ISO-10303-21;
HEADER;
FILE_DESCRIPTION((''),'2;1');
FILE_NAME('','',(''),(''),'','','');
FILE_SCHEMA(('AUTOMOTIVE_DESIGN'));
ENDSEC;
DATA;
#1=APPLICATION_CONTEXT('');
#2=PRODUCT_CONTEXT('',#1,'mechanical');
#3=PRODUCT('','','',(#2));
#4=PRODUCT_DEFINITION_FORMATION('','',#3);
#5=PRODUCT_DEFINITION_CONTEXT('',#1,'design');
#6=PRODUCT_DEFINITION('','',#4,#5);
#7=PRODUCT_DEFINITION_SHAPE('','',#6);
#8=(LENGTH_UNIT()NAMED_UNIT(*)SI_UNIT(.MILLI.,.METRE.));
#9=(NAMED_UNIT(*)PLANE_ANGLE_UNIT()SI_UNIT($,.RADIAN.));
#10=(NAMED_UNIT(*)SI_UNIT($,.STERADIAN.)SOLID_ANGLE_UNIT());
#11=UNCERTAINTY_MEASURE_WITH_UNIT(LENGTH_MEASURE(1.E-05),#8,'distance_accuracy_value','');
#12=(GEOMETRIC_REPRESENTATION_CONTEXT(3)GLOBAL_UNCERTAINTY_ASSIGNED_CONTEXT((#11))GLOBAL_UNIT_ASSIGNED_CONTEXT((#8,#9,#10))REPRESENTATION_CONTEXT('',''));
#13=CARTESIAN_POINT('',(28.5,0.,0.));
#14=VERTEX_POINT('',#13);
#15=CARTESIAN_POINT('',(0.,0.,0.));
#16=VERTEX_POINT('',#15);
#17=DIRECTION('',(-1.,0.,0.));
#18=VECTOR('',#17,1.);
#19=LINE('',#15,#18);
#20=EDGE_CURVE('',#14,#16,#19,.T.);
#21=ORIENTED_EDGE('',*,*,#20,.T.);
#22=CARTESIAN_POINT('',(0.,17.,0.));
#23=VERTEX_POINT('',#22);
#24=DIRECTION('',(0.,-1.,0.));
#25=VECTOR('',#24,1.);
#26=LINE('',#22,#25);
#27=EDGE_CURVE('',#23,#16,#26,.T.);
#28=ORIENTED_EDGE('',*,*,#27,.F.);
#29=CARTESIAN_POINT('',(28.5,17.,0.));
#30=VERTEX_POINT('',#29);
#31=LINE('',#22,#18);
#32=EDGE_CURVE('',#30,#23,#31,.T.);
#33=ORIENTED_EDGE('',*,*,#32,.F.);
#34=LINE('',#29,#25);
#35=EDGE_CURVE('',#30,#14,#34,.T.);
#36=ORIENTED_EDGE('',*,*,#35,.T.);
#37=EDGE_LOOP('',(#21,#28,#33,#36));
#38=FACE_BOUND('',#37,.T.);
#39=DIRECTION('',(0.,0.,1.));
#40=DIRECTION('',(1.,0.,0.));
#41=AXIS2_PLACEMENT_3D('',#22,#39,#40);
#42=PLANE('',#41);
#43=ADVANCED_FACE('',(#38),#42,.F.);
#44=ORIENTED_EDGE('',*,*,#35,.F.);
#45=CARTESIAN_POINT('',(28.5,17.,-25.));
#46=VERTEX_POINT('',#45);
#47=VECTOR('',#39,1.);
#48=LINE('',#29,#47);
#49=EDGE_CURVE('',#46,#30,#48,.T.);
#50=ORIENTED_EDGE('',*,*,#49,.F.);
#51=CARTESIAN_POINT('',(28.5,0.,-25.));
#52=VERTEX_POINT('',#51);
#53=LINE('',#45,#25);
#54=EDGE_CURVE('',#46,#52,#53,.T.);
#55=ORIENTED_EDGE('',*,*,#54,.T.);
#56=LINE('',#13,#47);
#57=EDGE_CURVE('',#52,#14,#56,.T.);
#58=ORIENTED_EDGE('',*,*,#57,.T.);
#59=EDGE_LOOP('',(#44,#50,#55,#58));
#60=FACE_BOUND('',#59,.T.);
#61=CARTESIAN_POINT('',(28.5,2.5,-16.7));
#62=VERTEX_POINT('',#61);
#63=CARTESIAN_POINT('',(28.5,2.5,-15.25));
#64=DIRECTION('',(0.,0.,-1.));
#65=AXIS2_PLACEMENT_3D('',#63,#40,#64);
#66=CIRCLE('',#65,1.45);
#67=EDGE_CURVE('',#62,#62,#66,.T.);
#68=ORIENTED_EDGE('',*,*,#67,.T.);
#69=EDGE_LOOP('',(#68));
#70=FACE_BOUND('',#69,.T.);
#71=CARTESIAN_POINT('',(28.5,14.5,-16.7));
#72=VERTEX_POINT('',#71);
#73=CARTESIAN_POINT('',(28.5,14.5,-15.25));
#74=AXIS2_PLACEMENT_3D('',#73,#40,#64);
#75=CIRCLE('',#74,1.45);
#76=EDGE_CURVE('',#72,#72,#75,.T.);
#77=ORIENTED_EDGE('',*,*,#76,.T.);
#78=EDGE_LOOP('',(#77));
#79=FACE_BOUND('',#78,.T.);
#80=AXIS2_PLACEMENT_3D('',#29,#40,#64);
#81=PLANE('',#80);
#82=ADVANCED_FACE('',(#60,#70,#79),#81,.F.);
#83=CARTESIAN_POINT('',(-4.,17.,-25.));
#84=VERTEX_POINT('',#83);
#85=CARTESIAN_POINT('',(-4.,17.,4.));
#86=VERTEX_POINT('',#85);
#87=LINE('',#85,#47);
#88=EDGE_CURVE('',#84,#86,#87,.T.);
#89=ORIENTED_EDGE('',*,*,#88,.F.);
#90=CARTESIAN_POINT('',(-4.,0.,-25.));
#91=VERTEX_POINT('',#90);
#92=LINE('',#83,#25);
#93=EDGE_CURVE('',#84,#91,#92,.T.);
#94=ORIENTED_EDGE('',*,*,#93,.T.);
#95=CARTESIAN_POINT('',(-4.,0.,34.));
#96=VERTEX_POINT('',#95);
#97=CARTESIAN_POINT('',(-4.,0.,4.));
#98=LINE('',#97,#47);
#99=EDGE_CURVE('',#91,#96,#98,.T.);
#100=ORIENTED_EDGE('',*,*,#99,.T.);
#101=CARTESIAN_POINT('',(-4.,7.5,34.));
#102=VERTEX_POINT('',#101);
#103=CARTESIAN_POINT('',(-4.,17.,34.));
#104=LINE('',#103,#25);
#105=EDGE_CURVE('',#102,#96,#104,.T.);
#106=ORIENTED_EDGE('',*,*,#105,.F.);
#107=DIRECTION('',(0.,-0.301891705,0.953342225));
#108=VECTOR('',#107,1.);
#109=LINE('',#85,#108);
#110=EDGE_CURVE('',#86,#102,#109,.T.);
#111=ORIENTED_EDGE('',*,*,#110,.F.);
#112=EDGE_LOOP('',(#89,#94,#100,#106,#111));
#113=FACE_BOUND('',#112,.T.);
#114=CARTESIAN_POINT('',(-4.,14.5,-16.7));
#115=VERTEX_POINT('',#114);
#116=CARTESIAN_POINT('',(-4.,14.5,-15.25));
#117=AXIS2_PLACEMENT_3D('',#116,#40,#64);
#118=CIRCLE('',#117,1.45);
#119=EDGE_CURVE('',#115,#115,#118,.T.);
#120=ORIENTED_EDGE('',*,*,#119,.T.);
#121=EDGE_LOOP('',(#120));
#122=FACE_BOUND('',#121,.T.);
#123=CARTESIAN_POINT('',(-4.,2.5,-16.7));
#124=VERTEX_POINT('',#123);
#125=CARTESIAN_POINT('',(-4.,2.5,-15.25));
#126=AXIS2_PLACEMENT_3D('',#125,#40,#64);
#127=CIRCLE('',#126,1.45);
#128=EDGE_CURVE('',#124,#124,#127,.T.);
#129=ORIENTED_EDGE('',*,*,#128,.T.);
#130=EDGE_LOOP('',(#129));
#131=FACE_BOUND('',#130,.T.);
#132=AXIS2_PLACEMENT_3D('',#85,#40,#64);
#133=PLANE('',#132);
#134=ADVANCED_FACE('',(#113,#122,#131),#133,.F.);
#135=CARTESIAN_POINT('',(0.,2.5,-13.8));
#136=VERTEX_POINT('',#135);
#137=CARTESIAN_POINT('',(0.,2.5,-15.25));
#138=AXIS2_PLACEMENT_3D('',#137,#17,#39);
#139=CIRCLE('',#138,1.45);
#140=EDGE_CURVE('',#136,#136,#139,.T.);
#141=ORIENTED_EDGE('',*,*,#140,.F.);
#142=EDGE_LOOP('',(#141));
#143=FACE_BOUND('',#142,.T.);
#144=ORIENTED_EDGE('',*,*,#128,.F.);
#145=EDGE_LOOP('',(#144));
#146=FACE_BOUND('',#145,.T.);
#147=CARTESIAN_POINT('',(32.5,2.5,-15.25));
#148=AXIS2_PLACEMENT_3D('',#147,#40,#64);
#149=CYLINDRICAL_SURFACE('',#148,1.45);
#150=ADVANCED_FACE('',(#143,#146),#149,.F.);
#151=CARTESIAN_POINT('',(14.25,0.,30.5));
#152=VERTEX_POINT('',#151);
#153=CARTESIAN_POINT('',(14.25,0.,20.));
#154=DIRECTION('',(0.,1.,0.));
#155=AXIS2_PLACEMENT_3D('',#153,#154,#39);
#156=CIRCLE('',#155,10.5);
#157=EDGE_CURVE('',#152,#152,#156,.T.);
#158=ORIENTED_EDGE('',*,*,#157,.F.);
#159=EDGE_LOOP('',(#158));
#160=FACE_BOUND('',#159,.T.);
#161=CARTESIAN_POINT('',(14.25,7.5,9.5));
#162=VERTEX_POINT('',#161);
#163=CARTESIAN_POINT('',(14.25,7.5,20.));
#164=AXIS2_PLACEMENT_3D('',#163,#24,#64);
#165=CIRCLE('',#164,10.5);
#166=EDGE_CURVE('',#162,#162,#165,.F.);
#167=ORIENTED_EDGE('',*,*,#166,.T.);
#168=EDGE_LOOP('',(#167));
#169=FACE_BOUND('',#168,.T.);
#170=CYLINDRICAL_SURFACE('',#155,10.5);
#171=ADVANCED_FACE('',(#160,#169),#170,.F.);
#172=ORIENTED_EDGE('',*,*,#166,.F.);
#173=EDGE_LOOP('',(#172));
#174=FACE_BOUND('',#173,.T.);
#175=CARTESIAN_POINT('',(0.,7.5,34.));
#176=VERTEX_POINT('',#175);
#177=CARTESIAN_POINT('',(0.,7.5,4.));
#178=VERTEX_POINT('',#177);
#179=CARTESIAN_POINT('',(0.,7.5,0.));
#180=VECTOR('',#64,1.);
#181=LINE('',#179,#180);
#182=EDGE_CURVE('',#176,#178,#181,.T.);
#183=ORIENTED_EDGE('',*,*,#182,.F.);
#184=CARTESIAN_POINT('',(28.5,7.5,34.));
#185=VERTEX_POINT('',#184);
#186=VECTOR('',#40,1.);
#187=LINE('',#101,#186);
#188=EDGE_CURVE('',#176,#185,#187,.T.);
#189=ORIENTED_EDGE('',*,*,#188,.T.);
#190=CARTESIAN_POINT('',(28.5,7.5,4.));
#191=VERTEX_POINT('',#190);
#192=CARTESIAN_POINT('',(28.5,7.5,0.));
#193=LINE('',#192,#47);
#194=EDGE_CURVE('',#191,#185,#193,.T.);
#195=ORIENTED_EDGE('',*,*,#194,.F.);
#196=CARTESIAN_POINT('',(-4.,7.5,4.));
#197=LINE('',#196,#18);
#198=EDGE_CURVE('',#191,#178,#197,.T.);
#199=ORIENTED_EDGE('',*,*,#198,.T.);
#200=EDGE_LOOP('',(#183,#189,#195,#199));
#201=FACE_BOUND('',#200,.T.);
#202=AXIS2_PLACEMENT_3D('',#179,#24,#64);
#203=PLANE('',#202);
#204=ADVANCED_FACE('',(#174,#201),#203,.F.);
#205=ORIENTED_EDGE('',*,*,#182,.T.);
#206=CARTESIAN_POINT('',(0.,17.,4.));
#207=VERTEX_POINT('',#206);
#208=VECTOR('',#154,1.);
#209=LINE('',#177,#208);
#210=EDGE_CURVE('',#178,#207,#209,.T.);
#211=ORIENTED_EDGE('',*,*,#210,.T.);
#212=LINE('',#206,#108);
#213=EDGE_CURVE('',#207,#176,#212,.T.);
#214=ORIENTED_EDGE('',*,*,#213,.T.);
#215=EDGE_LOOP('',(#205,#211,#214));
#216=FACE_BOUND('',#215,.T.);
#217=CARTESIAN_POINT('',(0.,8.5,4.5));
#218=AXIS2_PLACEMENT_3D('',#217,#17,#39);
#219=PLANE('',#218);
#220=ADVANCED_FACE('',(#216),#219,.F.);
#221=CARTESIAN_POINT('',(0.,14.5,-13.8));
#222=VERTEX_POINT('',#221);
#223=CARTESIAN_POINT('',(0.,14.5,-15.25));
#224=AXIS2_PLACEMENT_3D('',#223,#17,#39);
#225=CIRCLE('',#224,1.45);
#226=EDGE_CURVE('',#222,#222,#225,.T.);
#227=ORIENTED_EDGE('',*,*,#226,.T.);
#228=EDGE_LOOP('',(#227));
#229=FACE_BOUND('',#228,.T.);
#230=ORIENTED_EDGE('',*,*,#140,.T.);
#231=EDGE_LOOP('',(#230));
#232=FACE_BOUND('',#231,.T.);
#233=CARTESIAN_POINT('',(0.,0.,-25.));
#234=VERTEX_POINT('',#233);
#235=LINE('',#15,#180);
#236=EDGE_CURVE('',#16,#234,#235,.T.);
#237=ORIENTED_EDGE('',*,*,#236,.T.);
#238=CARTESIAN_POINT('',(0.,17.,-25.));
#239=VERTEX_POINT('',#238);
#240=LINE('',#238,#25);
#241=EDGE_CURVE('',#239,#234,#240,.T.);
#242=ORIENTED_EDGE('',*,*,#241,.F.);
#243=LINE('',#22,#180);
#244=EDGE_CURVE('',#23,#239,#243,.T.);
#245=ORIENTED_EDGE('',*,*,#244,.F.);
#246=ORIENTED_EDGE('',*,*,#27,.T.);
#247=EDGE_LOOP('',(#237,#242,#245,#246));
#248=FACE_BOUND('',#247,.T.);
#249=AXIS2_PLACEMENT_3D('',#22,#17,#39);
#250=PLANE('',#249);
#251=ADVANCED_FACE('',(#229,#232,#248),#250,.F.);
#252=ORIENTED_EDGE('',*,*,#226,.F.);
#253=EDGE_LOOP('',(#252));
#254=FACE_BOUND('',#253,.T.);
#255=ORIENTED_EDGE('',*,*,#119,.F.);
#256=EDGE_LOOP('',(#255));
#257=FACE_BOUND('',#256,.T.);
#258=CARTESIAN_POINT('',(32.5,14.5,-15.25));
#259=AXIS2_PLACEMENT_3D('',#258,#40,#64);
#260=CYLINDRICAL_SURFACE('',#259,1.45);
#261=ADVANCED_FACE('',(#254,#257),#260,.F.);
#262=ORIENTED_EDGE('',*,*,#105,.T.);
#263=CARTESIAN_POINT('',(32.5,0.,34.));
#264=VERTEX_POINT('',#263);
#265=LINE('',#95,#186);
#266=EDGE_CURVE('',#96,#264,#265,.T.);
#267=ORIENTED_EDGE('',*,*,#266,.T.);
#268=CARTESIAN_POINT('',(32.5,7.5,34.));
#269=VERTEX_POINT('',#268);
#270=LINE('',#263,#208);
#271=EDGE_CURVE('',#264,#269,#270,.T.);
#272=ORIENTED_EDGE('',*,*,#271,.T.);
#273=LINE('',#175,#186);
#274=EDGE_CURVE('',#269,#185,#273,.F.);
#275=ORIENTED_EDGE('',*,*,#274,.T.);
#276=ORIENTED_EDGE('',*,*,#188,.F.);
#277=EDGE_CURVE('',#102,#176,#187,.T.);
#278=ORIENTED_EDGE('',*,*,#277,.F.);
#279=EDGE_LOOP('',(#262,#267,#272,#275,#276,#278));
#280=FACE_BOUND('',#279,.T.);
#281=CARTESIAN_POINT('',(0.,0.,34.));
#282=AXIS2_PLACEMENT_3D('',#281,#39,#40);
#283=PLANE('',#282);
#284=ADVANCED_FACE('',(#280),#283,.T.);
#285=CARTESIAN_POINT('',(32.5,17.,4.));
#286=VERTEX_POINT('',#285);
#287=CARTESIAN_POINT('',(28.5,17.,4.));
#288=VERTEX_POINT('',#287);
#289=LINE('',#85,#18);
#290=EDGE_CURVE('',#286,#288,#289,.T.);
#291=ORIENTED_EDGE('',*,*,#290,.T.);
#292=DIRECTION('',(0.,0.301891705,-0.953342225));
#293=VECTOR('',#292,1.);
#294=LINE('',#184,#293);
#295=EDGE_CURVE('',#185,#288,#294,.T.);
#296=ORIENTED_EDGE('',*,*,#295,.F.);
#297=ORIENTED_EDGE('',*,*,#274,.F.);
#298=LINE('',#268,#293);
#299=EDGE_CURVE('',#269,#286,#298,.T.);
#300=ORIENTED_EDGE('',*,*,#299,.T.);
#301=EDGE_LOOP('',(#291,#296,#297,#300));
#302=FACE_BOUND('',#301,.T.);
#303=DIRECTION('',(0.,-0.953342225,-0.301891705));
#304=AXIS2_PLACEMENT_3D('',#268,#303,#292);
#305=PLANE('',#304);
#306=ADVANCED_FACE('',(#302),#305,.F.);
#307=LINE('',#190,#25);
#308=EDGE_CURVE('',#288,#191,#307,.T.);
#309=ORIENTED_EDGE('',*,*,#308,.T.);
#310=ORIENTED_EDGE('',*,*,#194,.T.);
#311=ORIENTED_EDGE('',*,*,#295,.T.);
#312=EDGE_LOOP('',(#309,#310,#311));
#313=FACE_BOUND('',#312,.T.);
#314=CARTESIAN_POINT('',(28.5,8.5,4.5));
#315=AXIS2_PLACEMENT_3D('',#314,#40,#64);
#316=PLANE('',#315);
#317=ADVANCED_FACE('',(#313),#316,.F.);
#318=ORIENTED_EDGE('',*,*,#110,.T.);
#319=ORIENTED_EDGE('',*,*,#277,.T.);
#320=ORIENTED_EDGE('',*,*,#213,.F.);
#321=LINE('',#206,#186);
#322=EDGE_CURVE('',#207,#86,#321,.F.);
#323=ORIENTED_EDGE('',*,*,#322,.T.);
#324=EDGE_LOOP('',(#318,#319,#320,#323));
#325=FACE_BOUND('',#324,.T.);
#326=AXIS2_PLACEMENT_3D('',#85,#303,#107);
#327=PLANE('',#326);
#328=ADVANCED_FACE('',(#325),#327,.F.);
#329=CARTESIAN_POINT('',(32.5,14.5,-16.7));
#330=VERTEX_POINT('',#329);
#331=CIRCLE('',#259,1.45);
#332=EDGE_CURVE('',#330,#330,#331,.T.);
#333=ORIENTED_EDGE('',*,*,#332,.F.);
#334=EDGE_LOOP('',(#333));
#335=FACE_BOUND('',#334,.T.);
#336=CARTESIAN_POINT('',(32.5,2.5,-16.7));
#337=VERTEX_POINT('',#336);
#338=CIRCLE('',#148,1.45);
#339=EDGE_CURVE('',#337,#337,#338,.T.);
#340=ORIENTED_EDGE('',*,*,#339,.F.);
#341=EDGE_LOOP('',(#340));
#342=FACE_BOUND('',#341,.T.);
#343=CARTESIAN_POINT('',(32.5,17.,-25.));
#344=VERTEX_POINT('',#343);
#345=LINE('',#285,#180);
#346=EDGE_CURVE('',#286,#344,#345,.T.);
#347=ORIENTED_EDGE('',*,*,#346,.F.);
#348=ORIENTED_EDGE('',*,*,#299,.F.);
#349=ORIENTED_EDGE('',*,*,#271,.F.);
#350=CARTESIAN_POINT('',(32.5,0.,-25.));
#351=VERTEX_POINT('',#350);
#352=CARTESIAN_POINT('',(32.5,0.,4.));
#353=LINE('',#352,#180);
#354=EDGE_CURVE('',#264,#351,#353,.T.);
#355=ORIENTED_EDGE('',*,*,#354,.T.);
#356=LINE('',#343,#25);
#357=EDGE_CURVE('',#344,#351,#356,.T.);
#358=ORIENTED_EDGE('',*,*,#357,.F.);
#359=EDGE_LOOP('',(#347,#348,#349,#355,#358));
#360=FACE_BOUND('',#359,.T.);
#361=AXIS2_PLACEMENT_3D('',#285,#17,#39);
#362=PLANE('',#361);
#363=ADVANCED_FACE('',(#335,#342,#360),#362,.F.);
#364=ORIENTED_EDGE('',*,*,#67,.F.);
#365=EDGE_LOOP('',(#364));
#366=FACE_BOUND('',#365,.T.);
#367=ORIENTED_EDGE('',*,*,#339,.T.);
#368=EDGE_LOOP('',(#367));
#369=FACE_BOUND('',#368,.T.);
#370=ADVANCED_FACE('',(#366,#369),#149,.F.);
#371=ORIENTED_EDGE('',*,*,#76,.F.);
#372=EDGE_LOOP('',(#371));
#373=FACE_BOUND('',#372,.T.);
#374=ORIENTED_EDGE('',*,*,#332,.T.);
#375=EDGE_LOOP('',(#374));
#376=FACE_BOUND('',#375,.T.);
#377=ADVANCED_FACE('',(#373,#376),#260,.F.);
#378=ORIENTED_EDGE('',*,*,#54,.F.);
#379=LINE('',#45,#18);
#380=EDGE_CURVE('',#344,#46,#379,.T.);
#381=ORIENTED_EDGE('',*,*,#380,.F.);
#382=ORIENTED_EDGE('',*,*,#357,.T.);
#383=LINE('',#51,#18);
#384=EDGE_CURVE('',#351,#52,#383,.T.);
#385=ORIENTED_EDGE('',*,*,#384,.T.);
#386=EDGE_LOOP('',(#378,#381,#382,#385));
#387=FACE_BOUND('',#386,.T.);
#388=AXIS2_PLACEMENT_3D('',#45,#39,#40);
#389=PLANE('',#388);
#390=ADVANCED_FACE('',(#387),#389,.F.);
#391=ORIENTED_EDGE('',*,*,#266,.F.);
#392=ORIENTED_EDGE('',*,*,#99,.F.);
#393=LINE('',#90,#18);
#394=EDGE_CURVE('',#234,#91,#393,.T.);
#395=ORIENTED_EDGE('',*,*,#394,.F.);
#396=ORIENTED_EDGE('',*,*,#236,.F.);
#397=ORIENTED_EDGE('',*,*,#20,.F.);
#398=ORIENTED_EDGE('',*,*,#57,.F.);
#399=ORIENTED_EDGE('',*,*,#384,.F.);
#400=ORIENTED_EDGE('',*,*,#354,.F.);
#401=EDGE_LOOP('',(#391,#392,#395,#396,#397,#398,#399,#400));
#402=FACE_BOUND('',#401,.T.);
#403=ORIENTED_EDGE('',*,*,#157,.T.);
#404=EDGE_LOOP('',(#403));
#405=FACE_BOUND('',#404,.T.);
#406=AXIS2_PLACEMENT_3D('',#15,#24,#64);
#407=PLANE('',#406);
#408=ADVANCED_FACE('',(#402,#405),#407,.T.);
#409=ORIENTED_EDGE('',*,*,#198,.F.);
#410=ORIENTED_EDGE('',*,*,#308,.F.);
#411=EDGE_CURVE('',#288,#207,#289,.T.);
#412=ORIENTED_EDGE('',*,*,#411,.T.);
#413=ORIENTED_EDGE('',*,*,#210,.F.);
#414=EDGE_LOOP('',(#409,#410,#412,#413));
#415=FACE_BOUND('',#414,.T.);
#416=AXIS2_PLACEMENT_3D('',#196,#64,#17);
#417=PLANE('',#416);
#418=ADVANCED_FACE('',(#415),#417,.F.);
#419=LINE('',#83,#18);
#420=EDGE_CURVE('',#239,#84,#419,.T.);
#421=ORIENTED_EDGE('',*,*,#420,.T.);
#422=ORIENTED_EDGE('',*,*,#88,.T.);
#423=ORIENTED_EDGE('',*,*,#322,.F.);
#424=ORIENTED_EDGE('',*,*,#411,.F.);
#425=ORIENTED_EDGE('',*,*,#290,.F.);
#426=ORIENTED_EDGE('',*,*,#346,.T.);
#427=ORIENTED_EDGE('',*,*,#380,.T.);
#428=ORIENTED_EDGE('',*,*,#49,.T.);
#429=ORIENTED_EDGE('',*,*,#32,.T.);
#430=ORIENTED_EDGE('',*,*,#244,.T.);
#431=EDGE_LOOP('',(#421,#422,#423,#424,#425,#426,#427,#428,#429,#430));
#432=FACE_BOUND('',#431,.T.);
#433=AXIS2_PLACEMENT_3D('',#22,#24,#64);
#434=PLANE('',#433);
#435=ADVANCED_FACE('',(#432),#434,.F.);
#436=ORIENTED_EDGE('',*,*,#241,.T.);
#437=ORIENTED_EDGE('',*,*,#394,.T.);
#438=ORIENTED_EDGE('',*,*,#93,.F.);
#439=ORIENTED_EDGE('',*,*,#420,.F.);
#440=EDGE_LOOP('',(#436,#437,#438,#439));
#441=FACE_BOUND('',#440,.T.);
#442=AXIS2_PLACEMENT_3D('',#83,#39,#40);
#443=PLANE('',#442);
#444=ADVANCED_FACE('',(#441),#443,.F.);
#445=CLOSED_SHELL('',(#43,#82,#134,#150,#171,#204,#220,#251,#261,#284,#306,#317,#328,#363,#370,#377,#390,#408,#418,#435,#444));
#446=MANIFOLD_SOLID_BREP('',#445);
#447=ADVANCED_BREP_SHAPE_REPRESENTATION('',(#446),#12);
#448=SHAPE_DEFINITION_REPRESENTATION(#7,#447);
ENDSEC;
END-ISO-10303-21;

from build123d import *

# Parameters (mm, degrees)
BOSS_EXTRUDE1_DEPTH            = 17
M2_5_START                     = -4
M2_5_CLEARANCE_HOLE1_OUTLINE_R = 1.45
M2_5_CLEARANCE_HOLE1_DEPTH     = 36.5
SKETCH6_W                      = 36.5
SKETCH6_H                      = 17
BOSS_EXTRUDE2_DEPTH            = 30
SKETCH7_R                      = 10.5
CUT_EXTRUDE1_DEPTH             = 51.012498438
SKETCH8_W                      = 36.5
SKETCH8_H                      = 30
CUT_EXTRUDE2_DEPTH             = 9.5
RIB1_REACH                     = 54.7
SKETCH9_WALL_W                 = 138.86747894
SKETCH9_WALL_H                 = 4
RIB2_START                     = -4
RIB2_DEPTH                     = 4


# Read off the part's stored shape, not the designer's step: M2.5 Clearance Hole1, Rib2
with BuildPart() as part:
    # Sketch1 → Boss-Extrude1 (new body)
    with BuildSketch(Plane(origin=(0, 0, 0), x_dir=(1, 0, 0), z_dir=(0, 1, 0))):
        Polygon((32.5, -4), (32.5, 25), (28.5, 25), (28.5, 0), (0, 0), (0, 25), (-4, 25), (-4, -4), align=None)
    extrude(amount=BOSS_EXTRUDE1_DEPTH)

    # M2.5 Clearance Hole1 outline → M2.5 Clearance Hole1 (cut)
    with BuildSketch(Plane.YZ.offset(M2_5_START)):
        with Locations((2.5, -15.25)):
            Circle(M2_5_CLEARANCE_HOLE1_OUTLINE_R)
        with Locations((14.5, -15.25)):
            Circle(M2_5_CLEARANCE_HOLE1_OUTLINE_R)
    extrude(amount=M2_5_CLEARANCE_HOLE1_DEPTH, mode=Mode.SUBTRACT)

    # Sketch6 → Boss-Extrude2 (add)
    with BuildSketch(Plane.XY.offset(4)):
        with Locations((14.25, 8.5)):
            Rectangle(SKETCH6_W, SKETCH6_H)
    extrude(amount=BOSS_EXTRUDE2_DEPTH)

    # Sketch7 → Cut-Extrude1 (cut, through all)
    with BuildSketch(Plane(origin=(0, 17, 0), x_dir=(1, 0, 0), z_dir=(0, 1, 0))):
        with Locations(Location((14.25, -20, 0), (0, 0, 270))):
            Circle(SKETCH7_R)
    extrude(amount=-CUT_EXTRUDE1_DEPTH, mode=Mode.SUBTRACT)

    # Sketch8 → Cut-Extrude2 (cut)
    with BuildSketch(Plane(origin=(0, 17, 0), x_dir=(1, 0, 0), z_dir=(0, 1, 0))):
        with Locations((14.25, -19)):
            Rectangle(SKETCH8_W, SKETCH8_H)
    extrude(amount=-CUT_EXTRUDE2_DEPTH, mode=Mode.SUBTRACT)

    # Sketch9 wall → Rib1 (add, up to next)
    with BuildSketch(Plane(origin=(32.5, 12.25, 19), x_dir=(0, 0.301891704694, -0.953342225351), z_dir=(0, 0.953342225351, 0.301891704694)), mode=Mode.PRIVATE) as rib1_sk1:
        with Locations((0, 2)):
            Rectangle(SKETCH9_WALL_W, SKETCH9_WALL_H)
    rib1_tool1 = extrude(rib1_sk1.sketch, amount=-RIB1_REACH, mode=Mode.PRIVATE) - part.part
    add(rib1_tool1.solids().sort_by_distance((32.5, 12.25, 19))[0])

    # Rib2 outline → Rib2 (add)
    with BuildSketch(Plane.ZY.offset(4).offset(RIB2_START)):
        Polygon((34, 7.5), (4, 17), (4, 7.5), align=None)
    extrude(amount=RIB2_DEPTH)


solid = part.part
